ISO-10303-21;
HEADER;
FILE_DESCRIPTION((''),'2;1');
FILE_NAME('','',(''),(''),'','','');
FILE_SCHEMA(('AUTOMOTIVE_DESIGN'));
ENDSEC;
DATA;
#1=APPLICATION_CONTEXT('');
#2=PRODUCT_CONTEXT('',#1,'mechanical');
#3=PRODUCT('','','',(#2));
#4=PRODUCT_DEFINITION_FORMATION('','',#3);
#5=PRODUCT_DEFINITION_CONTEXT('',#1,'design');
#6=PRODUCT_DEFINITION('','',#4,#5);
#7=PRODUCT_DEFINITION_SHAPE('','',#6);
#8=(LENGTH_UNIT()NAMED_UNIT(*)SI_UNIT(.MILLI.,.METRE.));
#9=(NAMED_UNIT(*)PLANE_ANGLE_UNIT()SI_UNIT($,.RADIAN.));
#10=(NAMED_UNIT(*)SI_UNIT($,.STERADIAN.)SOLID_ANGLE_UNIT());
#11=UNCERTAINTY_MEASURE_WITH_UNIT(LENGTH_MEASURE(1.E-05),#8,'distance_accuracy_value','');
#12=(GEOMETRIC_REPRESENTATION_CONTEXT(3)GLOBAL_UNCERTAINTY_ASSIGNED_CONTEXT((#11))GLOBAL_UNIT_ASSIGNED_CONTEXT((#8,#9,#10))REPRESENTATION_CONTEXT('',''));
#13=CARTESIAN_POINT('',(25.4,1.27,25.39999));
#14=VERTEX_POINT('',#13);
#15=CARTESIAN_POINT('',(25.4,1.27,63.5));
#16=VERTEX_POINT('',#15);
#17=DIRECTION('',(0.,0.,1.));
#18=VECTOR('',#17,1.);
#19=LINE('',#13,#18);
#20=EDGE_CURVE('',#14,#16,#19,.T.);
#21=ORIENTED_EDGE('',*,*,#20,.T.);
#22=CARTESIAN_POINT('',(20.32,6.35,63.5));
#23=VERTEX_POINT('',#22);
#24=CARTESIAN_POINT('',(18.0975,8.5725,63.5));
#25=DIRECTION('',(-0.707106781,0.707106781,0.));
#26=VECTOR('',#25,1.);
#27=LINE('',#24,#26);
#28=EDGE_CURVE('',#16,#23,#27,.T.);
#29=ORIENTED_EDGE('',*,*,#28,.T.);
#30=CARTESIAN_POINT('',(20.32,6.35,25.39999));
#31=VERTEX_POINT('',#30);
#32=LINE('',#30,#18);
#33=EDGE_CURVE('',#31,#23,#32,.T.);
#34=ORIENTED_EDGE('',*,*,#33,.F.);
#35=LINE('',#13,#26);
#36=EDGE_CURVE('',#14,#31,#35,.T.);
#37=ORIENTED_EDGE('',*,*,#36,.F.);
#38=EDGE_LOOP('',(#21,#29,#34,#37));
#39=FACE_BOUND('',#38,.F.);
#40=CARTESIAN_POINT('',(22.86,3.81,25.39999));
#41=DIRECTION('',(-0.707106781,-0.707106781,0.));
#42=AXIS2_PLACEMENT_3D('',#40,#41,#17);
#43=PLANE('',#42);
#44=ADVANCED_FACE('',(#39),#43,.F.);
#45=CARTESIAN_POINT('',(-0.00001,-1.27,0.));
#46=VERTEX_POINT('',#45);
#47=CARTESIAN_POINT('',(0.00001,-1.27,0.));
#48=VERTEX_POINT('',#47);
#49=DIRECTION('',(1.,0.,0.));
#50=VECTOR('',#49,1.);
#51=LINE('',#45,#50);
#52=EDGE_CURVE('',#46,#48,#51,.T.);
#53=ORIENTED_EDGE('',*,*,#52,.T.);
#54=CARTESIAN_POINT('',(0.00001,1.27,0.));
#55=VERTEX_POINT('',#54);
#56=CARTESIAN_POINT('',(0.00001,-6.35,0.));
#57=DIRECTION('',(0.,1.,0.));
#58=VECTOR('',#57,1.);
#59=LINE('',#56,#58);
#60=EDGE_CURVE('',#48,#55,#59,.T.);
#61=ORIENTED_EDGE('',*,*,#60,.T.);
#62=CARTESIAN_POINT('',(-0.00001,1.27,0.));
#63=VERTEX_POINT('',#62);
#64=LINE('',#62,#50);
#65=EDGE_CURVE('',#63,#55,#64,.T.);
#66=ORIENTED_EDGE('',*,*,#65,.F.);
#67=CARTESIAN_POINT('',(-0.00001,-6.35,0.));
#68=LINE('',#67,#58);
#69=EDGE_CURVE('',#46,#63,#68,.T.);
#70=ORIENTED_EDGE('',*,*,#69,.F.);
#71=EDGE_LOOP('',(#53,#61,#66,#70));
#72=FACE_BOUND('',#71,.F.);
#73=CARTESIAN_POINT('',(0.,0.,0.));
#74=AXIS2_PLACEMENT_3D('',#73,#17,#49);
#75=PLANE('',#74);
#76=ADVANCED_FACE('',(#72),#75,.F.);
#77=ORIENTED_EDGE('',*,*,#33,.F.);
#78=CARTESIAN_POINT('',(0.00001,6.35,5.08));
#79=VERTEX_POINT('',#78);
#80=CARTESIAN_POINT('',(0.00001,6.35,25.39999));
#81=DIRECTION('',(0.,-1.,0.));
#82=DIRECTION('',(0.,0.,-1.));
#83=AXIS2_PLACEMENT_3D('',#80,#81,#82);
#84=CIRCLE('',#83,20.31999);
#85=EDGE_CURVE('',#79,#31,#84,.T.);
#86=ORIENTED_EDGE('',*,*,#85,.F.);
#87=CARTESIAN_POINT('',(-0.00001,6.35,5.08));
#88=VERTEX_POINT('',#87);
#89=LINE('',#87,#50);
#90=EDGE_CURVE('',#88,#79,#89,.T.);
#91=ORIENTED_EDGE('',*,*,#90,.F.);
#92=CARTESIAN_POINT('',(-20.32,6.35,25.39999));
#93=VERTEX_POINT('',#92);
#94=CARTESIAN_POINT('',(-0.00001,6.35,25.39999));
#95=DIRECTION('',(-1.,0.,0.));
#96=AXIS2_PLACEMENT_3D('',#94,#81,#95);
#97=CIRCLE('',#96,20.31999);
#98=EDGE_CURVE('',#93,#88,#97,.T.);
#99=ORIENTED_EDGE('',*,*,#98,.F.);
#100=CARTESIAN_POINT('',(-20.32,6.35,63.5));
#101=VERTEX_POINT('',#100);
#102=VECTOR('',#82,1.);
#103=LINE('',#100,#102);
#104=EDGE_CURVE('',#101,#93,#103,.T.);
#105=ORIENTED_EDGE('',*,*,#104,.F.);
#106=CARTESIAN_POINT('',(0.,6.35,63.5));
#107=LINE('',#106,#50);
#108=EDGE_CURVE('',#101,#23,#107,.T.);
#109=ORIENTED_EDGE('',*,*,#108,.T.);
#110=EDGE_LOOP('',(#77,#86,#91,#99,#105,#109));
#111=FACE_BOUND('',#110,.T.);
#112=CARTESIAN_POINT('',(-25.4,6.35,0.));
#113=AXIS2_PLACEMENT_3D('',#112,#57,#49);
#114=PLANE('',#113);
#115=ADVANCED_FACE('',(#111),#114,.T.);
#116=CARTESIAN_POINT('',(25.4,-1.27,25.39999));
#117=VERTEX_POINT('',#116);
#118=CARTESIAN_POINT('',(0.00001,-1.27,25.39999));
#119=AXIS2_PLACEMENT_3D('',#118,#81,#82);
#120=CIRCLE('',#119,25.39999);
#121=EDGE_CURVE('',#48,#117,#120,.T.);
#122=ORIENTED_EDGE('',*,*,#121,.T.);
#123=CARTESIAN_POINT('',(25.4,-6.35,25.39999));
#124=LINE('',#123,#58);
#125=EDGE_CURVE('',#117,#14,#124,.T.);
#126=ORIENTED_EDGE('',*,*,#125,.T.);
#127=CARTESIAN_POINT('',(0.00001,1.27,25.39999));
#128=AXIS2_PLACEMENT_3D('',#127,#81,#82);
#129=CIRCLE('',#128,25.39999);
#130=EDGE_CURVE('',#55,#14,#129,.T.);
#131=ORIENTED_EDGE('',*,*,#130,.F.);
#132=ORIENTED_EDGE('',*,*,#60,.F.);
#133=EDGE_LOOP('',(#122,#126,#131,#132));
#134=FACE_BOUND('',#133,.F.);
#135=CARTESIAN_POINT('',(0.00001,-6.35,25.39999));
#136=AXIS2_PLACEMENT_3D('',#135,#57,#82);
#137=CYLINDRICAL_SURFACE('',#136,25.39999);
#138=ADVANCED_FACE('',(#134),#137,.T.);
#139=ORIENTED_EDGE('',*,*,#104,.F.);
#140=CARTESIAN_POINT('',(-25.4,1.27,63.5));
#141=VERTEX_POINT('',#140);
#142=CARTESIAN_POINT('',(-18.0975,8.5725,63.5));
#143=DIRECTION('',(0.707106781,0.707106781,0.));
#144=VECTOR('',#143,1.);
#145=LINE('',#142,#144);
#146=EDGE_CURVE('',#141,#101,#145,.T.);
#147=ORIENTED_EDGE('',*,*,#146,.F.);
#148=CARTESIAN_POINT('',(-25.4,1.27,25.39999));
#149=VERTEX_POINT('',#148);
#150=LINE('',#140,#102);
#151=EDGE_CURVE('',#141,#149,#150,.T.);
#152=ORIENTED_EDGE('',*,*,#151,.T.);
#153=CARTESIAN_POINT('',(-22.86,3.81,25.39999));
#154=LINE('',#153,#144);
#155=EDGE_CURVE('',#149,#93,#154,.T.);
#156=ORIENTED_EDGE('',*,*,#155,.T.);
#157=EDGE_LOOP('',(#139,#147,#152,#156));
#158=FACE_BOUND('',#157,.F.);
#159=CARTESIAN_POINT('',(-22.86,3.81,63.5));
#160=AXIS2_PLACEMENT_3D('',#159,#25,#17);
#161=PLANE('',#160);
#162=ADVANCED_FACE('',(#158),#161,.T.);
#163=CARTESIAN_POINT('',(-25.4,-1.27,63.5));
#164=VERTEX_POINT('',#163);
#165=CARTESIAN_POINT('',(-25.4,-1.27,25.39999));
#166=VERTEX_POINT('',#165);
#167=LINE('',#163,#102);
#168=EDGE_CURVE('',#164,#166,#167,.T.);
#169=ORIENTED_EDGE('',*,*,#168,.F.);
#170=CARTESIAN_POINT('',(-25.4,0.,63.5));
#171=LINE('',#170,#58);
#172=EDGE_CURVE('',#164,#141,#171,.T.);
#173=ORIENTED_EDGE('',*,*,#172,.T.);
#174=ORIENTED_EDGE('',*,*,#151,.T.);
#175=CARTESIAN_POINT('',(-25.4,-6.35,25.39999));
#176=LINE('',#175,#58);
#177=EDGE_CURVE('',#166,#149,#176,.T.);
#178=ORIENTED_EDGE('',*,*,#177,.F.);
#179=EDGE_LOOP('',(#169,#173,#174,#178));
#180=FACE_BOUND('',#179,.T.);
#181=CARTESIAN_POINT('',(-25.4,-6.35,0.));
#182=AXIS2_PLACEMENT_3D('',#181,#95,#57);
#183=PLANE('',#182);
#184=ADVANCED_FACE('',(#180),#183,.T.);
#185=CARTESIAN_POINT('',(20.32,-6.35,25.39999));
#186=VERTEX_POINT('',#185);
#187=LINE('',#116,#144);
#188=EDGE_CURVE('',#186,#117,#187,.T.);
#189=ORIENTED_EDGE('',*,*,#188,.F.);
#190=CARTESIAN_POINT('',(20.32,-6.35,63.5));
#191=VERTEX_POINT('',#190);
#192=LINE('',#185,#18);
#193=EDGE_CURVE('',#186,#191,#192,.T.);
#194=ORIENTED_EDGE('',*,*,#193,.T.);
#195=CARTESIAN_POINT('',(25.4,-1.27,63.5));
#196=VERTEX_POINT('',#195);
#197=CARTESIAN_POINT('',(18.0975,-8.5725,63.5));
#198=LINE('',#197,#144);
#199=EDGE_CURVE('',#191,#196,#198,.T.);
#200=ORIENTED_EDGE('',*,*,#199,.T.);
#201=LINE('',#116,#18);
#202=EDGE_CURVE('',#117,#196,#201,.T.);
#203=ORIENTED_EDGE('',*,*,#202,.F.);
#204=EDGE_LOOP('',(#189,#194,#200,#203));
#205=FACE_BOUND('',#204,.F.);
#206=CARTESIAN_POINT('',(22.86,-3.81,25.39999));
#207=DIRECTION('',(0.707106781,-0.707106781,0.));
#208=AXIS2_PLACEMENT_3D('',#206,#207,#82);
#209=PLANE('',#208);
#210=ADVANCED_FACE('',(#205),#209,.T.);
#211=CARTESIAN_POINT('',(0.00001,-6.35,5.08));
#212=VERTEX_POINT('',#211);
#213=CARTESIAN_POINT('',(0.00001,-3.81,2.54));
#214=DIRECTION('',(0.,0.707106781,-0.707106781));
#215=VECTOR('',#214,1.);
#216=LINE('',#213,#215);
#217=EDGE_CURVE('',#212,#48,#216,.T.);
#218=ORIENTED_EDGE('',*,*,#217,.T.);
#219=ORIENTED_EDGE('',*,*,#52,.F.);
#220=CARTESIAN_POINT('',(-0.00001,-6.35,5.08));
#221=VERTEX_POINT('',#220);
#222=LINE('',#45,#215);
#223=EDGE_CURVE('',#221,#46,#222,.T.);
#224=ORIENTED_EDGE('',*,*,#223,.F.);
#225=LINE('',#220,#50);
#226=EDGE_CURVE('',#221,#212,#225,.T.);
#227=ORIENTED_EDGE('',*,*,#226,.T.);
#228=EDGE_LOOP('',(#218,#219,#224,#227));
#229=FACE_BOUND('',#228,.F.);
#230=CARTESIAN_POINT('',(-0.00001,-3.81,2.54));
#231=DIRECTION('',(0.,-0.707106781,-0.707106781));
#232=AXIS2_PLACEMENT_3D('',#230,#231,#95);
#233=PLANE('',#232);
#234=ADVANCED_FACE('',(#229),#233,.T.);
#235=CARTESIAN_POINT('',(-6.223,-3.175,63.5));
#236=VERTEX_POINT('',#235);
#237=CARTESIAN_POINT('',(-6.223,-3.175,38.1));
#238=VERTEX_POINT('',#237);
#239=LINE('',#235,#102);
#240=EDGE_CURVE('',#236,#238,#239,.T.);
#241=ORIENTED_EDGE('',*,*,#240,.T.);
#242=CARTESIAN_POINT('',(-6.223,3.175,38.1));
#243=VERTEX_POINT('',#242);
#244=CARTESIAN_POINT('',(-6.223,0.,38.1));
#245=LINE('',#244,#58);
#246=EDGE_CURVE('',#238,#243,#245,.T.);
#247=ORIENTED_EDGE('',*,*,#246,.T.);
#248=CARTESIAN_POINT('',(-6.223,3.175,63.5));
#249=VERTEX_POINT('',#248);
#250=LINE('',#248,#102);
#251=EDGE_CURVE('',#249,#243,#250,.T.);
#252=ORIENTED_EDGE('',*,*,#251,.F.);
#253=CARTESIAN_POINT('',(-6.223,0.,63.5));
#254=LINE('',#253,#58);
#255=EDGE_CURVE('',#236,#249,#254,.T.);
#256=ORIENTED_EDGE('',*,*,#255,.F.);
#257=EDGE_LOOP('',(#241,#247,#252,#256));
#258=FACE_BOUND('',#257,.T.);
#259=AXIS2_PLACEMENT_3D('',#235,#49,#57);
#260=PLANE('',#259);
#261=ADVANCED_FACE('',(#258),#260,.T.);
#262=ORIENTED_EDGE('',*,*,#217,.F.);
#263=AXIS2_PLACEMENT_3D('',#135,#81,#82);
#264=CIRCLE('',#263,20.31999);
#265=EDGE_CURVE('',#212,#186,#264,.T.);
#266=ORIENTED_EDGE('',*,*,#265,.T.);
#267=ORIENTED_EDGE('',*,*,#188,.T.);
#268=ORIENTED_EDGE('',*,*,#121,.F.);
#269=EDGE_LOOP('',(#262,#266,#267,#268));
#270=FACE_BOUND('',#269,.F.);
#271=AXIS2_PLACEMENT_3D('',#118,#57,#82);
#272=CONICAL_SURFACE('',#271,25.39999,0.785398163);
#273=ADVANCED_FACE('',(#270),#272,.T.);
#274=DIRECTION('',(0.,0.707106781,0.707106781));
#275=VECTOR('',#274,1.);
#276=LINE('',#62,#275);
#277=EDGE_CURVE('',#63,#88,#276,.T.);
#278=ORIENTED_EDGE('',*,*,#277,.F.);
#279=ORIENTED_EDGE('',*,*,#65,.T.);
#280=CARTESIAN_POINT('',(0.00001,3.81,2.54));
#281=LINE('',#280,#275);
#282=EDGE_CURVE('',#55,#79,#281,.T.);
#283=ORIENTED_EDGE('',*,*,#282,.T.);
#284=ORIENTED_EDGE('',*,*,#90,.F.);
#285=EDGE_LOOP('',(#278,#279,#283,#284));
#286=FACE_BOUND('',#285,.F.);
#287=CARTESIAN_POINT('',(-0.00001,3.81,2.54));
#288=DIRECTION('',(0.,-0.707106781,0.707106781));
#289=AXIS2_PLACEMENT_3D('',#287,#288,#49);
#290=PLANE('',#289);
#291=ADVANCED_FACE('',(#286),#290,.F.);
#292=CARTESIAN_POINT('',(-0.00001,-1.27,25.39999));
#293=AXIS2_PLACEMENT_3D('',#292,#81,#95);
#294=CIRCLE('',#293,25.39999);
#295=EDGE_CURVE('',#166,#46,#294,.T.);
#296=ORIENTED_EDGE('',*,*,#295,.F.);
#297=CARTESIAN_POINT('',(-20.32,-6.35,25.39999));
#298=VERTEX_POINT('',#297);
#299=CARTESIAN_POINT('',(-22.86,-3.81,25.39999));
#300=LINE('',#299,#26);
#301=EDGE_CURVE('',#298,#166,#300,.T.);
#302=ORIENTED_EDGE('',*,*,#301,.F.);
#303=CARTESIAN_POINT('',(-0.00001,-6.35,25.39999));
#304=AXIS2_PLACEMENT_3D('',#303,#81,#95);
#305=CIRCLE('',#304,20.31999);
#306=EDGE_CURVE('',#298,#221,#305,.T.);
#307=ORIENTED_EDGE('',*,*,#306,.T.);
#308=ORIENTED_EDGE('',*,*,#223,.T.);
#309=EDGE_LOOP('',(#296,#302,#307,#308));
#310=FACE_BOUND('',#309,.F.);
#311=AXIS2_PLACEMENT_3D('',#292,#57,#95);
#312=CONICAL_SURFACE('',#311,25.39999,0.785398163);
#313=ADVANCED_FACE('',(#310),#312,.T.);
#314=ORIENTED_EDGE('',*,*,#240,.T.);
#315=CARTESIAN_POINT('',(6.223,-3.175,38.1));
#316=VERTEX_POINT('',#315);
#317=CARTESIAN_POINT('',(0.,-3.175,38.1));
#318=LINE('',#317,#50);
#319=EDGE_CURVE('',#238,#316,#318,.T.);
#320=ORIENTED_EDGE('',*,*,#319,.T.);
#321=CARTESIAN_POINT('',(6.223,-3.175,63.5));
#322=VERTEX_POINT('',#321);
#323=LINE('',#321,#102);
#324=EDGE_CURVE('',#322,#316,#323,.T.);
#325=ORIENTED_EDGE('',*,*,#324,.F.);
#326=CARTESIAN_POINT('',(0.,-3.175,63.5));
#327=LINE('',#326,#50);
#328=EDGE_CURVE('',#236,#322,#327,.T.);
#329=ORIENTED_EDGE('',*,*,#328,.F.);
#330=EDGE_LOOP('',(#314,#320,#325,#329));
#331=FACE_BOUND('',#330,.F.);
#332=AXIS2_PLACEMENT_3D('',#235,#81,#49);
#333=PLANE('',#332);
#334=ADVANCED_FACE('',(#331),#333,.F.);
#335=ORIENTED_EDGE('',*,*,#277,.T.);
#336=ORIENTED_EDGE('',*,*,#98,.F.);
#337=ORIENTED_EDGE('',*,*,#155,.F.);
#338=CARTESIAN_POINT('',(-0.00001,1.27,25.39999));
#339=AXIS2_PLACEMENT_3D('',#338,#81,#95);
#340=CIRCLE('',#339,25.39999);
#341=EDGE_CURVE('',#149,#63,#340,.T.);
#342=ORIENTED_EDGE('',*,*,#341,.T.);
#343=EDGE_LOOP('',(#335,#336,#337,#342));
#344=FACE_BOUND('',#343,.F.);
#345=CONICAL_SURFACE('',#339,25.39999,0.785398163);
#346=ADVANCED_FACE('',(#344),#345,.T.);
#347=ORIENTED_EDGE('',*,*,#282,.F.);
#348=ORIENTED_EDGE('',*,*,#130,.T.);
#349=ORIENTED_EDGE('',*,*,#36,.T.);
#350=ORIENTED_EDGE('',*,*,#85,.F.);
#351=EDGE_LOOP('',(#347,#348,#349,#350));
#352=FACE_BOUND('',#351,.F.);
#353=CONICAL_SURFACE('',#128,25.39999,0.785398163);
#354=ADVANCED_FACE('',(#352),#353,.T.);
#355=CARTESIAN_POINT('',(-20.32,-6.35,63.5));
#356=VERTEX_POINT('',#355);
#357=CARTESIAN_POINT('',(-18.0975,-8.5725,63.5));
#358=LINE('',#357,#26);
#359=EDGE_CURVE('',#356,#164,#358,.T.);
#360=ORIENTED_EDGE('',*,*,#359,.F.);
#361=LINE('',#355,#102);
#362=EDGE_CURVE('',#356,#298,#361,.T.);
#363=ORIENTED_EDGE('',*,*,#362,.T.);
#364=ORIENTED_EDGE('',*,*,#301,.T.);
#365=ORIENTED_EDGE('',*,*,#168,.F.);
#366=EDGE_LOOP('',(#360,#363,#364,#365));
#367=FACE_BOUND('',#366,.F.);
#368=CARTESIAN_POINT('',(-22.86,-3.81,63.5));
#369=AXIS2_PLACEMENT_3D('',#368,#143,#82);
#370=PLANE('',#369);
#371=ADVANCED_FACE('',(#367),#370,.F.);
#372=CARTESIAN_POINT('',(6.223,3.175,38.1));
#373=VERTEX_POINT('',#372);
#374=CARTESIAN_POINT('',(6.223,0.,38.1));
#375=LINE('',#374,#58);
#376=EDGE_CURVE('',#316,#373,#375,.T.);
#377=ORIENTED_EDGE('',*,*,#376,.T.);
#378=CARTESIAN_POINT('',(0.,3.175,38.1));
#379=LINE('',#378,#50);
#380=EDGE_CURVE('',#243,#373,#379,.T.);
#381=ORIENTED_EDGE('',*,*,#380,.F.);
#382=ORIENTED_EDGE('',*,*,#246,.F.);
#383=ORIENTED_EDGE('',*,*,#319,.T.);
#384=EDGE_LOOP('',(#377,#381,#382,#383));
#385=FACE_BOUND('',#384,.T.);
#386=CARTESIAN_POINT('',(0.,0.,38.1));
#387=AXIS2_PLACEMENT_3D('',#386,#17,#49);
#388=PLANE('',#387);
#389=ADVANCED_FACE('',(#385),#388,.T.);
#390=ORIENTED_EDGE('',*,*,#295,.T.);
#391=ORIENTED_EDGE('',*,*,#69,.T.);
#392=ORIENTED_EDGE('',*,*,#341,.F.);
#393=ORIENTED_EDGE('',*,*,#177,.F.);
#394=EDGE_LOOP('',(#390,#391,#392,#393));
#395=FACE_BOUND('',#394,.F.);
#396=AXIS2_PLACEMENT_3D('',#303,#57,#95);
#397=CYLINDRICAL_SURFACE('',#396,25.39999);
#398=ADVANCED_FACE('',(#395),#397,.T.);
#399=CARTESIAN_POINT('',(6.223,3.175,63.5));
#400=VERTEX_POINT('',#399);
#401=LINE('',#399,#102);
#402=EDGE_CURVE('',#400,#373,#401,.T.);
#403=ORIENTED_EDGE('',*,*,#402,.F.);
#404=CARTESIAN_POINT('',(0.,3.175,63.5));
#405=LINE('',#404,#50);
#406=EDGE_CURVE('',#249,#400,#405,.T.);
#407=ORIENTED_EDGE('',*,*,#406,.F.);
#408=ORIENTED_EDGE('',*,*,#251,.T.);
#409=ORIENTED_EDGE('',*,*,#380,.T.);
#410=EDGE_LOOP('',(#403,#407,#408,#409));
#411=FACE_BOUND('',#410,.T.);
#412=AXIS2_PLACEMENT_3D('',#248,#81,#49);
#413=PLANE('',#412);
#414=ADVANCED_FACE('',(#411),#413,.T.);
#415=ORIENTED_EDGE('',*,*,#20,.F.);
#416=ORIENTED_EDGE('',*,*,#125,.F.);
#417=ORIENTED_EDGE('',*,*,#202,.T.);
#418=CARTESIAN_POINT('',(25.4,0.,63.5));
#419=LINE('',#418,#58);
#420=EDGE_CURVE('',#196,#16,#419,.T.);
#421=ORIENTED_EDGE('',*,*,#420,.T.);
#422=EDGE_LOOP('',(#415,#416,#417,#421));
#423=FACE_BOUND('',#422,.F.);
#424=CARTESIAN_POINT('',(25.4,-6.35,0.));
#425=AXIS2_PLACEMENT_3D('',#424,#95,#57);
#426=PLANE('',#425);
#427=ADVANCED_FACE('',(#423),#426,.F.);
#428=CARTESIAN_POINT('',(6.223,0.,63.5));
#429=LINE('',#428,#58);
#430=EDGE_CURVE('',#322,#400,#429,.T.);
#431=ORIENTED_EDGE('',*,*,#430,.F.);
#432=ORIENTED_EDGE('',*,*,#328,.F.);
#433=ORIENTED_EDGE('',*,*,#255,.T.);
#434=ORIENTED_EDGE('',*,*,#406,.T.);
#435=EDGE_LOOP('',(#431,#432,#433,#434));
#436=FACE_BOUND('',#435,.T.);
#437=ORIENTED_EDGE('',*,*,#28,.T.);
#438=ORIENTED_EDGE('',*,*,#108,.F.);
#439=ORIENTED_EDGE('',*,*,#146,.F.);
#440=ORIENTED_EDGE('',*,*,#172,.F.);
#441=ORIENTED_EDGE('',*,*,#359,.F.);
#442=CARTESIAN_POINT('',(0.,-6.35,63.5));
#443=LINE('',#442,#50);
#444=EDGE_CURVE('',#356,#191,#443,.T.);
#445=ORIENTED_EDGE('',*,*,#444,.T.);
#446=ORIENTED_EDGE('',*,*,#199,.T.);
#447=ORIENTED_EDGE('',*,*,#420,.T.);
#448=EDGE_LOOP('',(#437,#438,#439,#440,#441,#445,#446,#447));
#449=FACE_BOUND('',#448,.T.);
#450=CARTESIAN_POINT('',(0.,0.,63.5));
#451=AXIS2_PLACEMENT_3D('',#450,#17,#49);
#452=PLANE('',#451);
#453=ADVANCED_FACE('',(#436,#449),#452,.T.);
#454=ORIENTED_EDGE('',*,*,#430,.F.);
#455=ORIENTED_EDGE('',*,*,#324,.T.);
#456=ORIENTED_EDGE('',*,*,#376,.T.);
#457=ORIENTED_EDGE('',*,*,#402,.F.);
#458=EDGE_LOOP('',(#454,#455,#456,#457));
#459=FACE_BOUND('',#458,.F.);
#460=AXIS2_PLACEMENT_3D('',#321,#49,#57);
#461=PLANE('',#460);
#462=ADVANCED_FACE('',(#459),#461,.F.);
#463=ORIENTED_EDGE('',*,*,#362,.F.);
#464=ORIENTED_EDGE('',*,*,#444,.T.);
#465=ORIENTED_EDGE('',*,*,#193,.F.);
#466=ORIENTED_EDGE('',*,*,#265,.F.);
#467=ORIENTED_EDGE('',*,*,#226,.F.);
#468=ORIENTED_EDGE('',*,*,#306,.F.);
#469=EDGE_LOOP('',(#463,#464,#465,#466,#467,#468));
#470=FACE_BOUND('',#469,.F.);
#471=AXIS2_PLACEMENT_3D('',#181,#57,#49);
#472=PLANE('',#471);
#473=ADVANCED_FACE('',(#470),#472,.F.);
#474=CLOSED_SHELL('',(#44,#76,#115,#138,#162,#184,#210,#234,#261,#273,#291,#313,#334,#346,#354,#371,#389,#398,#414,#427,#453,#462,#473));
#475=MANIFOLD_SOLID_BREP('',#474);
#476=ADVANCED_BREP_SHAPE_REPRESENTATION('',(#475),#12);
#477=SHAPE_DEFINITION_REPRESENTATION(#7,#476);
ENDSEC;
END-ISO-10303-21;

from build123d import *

# Parameters (mm, degrees)
F0_W     = 50.8
F0_H     = 12.7
F1_DEPTH = 25.4
F2_DEPTH = 63.5
F3_R     = 25.39999
F4_SIZE  = 5.08
F5_W     = 12.446
F5_H     = 6.35
F6_DEPTH = 25.4


# Not quite as in the source:
# - a fillet or chamfer is up to 0.001 mm smaller than in the source, because OpenCascade refuses the exact size


with BuildPart() as f1:
    # F0 (on Top) → F1 (new body)
    with BuildSketch(Plane.XY):
        Rectangle(F0_W, F0_H)
    extrude(amount=F1_DEPTH)

    # F0 (on Top) → F2 (join)
    with BuildSketch(Plane.XY):
        Rectangle(F0_W, F0_H)
    extrude(amount=F2_DEPTH)

    # F3 (radius 25.4 in the source; OpenCascade refuses exactly that, so slightly less here)
    f3_edges = [f1.edges().sort_by_distance(p)[0] for p in [
        (25.4, 0, 0),
        (-25.4, 0, 0),
    ]]
    fillet(f3_edges, radius=F3_R)

    # F4
    f4_edges = [f1.edges().sort_by_distance(p)[0] for p in [
        (-17.960515, -6.35, 7.439485),
        (-17.960515, 6.35, 7.439485),
    ]]
    chamfer(f4_edges, length=F4_SIZE)

    # F5 (on face) → F6 (cut)
    with BuildSketch(Plane.XY.offset(63.5)):
        Rectangle(F5_W, F5_H)
    extrude(amount=-F6_DEPTH, mode=Mode.SUBTRACT)


solid = f1.part
